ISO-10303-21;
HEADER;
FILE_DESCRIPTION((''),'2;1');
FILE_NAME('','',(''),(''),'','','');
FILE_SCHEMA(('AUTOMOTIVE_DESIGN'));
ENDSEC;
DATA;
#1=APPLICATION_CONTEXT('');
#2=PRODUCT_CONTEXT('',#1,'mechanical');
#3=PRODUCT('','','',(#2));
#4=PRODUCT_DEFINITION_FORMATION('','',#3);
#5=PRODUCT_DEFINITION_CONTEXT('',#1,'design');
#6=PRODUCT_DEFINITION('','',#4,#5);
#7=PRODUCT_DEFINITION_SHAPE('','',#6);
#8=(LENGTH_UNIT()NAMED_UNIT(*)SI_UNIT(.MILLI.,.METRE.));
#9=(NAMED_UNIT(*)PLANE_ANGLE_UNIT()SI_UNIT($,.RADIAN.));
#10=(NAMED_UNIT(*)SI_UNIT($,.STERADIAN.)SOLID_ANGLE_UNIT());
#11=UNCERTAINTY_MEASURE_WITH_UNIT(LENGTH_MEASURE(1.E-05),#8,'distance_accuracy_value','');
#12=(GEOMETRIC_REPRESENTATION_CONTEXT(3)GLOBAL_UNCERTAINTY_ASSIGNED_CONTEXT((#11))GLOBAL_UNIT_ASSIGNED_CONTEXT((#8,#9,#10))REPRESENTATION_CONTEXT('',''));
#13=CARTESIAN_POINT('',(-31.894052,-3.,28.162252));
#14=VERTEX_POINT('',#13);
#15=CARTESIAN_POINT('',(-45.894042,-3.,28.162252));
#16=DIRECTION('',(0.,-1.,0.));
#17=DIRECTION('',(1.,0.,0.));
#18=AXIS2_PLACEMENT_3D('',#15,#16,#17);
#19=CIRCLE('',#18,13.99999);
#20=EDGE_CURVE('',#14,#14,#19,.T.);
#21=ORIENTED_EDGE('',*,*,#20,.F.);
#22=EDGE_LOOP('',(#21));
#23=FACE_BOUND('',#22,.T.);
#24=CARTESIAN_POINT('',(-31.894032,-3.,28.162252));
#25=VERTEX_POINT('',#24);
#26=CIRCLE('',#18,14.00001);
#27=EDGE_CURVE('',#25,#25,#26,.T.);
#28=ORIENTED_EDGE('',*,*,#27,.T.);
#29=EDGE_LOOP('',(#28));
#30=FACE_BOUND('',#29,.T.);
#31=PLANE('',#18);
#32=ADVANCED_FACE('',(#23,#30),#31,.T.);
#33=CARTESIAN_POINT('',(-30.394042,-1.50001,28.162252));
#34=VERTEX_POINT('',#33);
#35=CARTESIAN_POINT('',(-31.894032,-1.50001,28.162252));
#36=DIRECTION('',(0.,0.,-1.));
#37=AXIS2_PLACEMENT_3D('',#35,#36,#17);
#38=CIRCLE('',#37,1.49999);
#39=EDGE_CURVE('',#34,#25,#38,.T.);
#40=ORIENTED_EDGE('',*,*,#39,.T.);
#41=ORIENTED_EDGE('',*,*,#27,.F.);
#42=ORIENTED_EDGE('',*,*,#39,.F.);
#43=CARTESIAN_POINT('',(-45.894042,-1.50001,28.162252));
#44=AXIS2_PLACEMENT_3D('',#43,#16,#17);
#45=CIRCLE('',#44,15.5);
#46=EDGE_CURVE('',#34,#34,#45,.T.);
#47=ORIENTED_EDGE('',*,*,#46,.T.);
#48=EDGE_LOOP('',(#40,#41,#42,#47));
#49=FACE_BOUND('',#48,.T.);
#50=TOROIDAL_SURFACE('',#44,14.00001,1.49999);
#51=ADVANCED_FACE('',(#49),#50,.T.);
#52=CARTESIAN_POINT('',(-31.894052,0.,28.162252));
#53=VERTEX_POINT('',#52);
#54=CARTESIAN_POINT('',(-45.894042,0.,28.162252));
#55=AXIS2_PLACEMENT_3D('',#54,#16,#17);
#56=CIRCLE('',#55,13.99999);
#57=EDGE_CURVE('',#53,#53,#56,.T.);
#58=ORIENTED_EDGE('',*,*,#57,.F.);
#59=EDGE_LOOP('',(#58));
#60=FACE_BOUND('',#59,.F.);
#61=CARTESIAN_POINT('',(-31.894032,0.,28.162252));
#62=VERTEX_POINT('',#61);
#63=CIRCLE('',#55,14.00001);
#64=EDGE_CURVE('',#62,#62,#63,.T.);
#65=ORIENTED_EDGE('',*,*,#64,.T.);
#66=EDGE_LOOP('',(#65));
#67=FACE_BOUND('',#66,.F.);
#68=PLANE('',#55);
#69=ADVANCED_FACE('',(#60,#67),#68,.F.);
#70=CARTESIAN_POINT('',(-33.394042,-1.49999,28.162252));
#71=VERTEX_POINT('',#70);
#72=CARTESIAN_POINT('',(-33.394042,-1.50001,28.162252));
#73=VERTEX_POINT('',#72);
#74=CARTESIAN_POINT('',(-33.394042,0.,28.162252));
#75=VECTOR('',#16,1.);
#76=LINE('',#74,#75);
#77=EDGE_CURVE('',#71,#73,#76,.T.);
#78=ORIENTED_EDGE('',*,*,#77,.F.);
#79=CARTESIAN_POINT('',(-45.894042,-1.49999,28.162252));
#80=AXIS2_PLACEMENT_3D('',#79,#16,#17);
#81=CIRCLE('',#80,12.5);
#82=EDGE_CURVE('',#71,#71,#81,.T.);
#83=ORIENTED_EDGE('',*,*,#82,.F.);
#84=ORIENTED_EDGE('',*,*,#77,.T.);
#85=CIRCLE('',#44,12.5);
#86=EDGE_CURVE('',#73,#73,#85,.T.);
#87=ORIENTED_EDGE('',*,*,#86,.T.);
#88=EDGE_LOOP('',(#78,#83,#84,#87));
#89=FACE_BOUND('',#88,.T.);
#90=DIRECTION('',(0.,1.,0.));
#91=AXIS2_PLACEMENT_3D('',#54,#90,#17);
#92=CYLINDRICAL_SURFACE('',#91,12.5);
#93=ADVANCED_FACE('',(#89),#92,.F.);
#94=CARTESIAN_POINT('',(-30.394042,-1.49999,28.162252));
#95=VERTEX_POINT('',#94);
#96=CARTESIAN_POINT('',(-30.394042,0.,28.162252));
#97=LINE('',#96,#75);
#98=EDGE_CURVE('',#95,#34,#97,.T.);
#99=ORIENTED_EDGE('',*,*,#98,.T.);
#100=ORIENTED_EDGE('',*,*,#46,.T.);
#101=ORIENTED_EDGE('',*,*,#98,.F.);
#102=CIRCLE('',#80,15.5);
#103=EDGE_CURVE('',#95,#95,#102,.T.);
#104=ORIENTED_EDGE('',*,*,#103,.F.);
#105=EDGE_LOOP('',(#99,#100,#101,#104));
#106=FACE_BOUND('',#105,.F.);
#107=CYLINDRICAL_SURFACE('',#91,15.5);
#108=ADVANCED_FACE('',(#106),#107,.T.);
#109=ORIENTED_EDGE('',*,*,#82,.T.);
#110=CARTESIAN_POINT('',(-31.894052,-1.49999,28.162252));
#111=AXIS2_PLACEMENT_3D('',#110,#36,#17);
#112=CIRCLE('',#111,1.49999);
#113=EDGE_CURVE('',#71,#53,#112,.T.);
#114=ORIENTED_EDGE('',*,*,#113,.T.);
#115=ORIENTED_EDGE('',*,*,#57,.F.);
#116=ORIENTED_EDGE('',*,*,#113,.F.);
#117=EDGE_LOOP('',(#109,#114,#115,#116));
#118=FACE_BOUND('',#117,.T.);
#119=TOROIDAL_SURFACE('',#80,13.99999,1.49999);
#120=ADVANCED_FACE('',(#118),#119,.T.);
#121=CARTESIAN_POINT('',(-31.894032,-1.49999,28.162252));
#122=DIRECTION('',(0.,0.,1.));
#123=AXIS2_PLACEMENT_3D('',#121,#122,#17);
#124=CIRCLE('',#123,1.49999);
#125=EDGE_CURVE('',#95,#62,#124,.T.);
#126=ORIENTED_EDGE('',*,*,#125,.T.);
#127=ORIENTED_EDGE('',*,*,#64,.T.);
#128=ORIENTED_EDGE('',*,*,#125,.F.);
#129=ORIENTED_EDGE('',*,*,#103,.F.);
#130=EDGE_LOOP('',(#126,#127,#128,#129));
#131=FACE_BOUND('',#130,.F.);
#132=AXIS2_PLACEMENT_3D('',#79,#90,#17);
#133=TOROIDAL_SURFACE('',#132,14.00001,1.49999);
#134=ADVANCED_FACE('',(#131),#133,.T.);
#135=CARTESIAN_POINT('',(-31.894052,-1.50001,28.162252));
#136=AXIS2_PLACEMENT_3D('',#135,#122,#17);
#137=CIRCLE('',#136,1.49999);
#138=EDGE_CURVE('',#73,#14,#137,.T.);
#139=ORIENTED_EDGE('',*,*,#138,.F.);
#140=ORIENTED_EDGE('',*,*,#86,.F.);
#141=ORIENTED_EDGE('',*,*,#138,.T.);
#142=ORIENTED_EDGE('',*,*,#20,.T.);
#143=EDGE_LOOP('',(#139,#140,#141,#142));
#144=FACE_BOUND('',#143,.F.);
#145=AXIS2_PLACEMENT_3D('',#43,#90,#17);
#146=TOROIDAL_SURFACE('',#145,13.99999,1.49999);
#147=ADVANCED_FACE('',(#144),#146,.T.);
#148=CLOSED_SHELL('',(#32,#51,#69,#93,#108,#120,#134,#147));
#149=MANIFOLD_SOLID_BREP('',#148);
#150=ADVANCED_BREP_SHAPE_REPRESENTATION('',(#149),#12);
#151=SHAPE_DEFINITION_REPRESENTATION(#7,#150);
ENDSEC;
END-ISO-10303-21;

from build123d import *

# Parameters (mm, degrees)
F0_R     = 15.5
F0_R_2   = 12.5
F1_DEPTH = 3
F2_R     = 1.49999


# Not quite as in the source:
# - a fillet or chamfer is up to 0.001 mm smaller than in the source, because OpenCascade refuses the exact size


with BuildPart() as f1:
    # F0 (on Front) → F1 (new body)
    with BuildSketch(Plane.XZ):
        with Locations((-45.8940416574, 28.1622521579)):
            Circle(F0_R)
        with Locations((-45.8940416574, 28.1622521579)):
            Circle(F0_R_2, mode=Mode.SUBTRACT)
    extrude(amount=F1_DEPTH)

    # F2 (radius 1.5 in the source; OpenCascade refuses exactly that, so slightly less here)
    f2_edges = [f1.edges().sort_by_distance(p)[0] for p in [
        (-61.394042, -3, 28.162252),
        (-58.394042, -3, 28.162252),
        (-61.394042, 0, 28.162252),
        (-58.394042, 0, 28.162252),
    ]]
    fillet(f2_edges, radius=F2_R)


solid = f1.part
